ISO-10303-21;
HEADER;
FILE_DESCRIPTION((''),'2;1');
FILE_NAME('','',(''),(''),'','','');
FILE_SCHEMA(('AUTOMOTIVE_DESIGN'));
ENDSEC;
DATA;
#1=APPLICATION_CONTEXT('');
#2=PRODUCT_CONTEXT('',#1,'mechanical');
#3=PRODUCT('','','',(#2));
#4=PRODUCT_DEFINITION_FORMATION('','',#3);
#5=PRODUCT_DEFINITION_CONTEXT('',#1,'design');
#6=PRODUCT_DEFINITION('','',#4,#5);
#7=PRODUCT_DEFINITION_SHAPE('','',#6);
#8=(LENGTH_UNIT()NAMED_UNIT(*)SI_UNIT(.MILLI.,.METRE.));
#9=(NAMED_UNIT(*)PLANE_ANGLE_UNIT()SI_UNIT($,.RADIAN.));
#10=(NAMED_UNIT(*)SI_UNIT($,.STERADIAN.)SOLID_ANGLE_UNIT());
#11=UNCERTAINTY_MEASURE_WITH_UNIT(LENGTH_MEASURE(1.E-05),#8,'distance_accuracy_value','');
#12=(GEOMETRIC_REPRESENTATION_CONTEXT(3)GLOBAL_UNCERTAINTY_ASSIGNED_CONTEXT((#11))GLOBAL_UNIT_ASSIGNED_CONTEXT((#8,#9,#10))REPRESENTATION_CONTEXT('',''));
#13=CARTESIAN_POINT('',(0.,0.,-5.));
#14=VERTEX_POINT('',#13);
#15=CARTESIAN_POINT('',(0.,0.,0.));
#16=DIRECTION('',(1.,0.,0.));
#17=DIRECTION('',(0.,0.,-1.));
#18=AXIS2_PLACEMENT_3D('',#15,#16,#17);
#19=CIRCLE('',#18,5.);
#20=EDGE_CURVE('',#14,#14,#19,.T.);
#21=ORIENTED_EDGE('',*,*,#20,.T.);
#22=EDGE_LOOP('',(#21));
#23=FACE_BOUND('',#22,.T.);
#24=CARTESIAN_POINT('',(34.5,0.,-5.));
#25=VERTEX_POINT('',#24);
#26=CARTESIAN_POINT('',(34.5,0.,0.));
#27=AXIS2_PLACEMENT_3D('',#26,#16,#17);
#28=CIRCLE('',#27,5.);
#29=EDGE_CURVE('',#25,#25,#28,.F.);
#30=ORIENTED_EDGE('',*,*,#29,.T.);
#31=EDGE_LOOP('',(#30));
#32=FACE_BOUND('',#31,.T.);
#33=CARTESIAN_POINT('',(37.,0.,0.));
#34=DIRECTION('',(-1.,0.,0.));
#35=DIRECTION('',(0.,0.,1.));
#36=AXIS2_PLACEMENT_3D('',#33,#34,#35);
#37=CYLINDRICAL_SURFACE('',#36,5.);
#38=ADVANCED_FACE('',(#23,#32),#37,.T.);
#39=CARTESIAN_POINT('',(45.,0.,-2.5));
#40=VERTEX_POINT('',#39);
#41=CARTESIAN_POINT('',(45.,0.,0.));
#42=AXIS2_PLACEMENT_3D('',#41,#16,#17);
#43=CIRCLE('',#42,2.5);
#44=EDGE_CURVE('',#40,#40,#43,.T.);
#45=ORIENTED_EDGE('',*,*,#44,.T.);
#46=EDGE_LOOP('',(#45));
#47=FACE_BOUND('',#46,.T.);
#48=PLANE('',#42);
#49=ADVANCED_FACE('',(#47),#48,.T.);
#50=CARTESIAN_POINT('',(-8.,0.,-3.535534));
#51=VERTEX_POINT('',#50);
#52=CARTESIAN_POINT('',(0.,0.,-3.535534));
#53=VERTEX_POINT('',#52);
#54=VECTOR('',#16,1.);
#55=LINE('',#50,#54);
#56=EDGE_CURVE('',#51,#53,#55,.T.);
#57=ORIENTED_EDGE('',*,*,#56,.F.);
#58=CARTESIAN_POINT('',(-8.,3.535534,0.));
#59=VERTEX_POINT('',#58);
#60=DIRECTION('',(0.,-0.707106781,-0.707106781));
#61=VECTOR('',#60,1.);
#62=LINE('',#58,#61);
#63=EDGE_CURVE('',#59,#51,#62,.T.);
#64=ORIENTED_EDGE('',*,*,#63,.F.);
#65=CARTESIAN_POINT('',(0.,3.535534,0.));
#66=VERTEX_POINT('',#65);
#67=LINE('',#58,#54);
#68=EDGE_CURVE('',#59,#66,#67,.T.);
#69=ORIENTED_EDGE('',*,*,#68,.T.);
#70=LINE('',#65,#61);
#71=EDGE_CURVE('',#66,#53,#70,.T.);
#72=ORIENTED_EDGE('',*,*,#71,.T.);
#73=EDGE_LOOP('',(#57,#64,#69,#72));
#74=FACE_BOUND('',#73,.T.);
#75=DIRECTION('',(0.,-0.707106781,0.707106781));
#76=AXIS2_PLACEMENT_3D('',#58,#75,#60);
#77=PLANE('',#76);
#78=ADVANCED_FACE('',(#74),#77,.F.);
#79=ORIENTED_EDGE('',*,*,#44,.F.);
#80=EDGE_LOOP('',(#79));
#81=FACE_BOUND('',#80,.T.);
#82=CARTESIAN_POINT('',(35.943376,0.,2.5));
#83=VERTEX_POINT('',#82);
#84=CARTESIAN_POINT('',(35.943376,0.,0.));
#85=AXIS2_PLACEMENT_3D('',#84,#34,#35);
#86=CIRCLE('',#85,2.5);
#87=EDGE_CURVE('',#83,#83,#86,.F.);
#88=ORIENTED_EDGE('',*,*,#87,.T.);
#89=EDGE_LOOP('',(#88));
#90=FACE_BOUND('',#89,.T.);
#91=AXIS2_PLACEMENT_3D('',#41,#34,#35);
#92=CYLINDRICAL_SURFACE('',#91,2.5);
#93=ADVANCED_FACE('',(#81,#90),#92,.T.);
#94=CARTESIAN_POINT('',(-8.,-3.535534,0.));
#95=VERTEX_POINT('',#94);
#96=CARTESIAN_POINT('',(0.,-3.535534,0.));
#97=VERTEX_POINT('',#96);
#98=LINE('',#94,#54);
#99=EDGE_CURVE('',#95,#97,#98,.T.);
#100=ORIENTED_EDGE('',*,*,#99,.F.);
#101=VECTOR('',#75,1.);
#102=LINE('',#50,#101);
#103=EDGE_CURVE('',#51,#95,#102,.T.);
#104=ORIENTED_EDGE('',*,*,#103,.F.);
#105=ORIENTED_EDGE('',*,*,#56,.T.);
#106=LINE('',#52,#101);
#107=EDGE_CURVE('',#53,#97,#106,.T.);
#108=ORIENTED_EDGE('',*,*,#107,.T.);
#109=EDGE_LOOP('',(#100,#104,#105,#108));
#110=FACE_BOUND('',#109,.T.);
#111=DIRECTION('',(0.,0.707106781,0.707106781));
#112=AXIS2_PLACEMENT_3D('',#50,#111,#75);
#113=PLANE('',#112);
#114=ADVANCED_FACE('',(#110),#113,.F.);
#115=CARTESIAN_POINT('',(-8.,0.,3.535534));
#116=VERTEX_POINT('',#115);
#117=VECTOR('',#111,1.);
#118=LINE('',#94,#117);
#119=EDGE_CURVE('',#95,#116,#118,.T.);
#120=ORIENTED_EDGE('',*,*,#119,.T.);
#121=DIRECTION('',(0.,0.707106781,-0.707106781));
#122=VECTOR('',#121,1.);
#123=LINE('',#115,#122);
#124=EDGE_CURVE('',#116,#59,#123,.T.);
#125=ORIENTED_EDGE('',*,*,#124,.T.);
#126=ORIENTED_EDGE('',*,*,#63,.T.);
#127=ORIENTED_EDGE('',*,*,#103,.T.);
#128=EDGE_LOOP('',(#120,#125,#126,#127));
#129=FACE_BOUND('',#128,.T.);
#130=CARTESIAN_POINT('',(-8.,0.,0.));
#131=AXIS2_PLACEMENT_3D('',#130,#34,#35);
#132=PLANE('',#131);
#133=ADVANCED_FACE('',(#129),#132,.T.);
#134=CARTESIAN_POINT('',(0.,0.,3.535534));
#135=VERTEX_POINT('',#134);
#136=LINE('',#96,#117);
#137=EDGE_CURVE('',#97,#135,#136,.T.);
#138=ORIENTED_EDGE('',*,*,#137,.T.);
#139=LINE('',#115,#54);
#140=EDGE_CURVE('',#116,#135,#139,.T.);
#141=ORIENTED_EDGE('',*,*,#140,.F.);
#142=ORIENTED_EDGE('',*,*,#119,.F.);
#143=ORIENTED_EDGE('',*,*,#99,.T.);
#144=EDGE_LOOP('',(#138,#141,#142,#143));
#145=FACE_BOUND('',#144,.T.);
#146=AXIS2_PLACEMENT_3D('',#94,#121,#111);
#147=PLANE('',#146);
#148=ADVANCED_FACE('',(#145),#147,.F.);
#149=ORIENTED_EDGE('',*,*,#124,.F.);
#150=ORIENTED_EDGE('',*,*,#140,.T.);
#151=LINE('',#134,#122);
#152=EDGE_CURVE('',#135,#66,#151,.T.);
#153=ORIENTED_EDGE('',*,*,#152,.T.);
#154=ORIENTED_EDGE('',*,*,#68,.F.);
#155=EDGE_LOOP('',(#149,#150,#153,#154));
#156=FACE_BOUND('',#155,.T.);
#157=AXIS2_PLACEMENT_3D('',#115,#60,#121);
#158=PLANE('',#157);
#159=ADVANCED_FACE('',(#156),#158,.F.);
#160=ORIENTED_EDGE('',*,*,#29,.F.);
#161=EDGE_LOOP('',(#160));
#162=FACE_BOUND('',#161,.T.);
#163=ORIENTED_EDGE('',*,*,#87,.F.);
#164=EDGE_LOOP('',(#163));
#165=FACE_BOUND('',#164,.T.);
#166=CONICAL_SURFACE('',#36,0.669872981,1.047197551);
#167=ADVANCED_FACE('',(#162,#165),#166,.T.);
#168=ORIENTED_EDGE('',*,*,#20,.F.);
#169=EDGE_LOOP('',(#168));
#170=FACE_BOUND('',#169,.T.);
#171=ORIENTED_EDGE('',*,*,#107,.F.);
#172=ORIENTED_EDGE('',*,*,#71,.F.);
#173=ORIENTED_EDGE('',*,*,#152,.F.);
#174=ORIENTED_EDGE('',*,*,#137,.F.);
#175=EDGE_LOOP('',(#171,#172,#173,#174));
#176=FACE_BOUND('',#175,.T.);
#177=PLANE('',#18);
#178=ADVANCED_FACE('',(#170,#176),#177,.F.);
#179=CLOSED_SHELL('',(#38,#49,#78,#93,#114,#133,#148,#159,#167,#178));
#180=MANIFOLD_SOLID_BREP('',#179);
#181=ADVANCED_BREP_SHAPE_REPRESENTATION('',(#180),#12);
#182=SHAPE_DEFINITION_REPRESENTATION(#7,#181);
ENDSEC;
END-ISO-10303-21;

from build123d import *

# Parameters (mm, degrees)
SKETCH_1_R       = 5
EXTRUDE_1_DEPTH  = 37
SKETCH_2_R       = 2.5
EXTRUDE_2_DEPTH  = 8
EXTRUDE_3_DEPTH  = 8
CHAMFER_1_SIZE   = 2.5
CHAMFER_1_SIZE_2 = 4.330127019


with BuildPart() as part:
    # 草图1 → 凸台-拉伸1 (new body)
    with BuildSketch(Plane(origin=(0, 0, 0), x_dir=(0, 0, -1), z_dir=(1, 0, 0))):
        Circle(SKETCH_1_R)
    extrude(amount=EXTRUDE_1_DEPTH)

    # 草图2 → 凸台-拉伸2 (add)
    with BuildSketch(Plane(origin=(37, 0, 0), x_dir=(0, 0, -1), z_dir=(1, 0, 0))):
        Circle(SKETCH_2_R)
    extrude(amount=EXTRUDE_2_DEPTH)

    # 草图3 → 凸台-拉伸3 (add)
    with BuildSketch(Plane.ZY):
        Polygon((0, 3.535533906), (-3.535533906, 0), (0, -3.535533906), (3.535533906, 0), align=None)
    extrude(amount=EXTRUDE_3_DEPTH)

    # 倒角1
    # the kernel refuses this chamfer: 4.330127019, 2.5 mm, written as the material it takes off along each edge
    with BuildSketch(Plane(origin=(37, 0, 0), x_dir=(0, 0, -1), z_dir=(0, -1, 0))) as chamfer_1_piece_1_section:
        Polygon((5, -CHAMFER_1_SIZE), (5 - CHAMFER_1_SIZE_2, 0), (5, 0), align=None)
    chamfer_1_piece_1 = revolve(axis=Axis((37, 0, 0), (1, 0, 0)), mode=Mode.PRIVATE)
    chamfer_1_piece_1 = chamfer_1_piece_1 - Plane(origin=(35.221489766, 0, 0), x_dir=(0, 0, -1), z_dir=(-1, 0, 0)) * Cylinder(2.5, 20, mode=Mode.PRIVATE)
    add(chamfer_1_piece_1, mode=Mode.SUBTRACT)


solid = part.part
